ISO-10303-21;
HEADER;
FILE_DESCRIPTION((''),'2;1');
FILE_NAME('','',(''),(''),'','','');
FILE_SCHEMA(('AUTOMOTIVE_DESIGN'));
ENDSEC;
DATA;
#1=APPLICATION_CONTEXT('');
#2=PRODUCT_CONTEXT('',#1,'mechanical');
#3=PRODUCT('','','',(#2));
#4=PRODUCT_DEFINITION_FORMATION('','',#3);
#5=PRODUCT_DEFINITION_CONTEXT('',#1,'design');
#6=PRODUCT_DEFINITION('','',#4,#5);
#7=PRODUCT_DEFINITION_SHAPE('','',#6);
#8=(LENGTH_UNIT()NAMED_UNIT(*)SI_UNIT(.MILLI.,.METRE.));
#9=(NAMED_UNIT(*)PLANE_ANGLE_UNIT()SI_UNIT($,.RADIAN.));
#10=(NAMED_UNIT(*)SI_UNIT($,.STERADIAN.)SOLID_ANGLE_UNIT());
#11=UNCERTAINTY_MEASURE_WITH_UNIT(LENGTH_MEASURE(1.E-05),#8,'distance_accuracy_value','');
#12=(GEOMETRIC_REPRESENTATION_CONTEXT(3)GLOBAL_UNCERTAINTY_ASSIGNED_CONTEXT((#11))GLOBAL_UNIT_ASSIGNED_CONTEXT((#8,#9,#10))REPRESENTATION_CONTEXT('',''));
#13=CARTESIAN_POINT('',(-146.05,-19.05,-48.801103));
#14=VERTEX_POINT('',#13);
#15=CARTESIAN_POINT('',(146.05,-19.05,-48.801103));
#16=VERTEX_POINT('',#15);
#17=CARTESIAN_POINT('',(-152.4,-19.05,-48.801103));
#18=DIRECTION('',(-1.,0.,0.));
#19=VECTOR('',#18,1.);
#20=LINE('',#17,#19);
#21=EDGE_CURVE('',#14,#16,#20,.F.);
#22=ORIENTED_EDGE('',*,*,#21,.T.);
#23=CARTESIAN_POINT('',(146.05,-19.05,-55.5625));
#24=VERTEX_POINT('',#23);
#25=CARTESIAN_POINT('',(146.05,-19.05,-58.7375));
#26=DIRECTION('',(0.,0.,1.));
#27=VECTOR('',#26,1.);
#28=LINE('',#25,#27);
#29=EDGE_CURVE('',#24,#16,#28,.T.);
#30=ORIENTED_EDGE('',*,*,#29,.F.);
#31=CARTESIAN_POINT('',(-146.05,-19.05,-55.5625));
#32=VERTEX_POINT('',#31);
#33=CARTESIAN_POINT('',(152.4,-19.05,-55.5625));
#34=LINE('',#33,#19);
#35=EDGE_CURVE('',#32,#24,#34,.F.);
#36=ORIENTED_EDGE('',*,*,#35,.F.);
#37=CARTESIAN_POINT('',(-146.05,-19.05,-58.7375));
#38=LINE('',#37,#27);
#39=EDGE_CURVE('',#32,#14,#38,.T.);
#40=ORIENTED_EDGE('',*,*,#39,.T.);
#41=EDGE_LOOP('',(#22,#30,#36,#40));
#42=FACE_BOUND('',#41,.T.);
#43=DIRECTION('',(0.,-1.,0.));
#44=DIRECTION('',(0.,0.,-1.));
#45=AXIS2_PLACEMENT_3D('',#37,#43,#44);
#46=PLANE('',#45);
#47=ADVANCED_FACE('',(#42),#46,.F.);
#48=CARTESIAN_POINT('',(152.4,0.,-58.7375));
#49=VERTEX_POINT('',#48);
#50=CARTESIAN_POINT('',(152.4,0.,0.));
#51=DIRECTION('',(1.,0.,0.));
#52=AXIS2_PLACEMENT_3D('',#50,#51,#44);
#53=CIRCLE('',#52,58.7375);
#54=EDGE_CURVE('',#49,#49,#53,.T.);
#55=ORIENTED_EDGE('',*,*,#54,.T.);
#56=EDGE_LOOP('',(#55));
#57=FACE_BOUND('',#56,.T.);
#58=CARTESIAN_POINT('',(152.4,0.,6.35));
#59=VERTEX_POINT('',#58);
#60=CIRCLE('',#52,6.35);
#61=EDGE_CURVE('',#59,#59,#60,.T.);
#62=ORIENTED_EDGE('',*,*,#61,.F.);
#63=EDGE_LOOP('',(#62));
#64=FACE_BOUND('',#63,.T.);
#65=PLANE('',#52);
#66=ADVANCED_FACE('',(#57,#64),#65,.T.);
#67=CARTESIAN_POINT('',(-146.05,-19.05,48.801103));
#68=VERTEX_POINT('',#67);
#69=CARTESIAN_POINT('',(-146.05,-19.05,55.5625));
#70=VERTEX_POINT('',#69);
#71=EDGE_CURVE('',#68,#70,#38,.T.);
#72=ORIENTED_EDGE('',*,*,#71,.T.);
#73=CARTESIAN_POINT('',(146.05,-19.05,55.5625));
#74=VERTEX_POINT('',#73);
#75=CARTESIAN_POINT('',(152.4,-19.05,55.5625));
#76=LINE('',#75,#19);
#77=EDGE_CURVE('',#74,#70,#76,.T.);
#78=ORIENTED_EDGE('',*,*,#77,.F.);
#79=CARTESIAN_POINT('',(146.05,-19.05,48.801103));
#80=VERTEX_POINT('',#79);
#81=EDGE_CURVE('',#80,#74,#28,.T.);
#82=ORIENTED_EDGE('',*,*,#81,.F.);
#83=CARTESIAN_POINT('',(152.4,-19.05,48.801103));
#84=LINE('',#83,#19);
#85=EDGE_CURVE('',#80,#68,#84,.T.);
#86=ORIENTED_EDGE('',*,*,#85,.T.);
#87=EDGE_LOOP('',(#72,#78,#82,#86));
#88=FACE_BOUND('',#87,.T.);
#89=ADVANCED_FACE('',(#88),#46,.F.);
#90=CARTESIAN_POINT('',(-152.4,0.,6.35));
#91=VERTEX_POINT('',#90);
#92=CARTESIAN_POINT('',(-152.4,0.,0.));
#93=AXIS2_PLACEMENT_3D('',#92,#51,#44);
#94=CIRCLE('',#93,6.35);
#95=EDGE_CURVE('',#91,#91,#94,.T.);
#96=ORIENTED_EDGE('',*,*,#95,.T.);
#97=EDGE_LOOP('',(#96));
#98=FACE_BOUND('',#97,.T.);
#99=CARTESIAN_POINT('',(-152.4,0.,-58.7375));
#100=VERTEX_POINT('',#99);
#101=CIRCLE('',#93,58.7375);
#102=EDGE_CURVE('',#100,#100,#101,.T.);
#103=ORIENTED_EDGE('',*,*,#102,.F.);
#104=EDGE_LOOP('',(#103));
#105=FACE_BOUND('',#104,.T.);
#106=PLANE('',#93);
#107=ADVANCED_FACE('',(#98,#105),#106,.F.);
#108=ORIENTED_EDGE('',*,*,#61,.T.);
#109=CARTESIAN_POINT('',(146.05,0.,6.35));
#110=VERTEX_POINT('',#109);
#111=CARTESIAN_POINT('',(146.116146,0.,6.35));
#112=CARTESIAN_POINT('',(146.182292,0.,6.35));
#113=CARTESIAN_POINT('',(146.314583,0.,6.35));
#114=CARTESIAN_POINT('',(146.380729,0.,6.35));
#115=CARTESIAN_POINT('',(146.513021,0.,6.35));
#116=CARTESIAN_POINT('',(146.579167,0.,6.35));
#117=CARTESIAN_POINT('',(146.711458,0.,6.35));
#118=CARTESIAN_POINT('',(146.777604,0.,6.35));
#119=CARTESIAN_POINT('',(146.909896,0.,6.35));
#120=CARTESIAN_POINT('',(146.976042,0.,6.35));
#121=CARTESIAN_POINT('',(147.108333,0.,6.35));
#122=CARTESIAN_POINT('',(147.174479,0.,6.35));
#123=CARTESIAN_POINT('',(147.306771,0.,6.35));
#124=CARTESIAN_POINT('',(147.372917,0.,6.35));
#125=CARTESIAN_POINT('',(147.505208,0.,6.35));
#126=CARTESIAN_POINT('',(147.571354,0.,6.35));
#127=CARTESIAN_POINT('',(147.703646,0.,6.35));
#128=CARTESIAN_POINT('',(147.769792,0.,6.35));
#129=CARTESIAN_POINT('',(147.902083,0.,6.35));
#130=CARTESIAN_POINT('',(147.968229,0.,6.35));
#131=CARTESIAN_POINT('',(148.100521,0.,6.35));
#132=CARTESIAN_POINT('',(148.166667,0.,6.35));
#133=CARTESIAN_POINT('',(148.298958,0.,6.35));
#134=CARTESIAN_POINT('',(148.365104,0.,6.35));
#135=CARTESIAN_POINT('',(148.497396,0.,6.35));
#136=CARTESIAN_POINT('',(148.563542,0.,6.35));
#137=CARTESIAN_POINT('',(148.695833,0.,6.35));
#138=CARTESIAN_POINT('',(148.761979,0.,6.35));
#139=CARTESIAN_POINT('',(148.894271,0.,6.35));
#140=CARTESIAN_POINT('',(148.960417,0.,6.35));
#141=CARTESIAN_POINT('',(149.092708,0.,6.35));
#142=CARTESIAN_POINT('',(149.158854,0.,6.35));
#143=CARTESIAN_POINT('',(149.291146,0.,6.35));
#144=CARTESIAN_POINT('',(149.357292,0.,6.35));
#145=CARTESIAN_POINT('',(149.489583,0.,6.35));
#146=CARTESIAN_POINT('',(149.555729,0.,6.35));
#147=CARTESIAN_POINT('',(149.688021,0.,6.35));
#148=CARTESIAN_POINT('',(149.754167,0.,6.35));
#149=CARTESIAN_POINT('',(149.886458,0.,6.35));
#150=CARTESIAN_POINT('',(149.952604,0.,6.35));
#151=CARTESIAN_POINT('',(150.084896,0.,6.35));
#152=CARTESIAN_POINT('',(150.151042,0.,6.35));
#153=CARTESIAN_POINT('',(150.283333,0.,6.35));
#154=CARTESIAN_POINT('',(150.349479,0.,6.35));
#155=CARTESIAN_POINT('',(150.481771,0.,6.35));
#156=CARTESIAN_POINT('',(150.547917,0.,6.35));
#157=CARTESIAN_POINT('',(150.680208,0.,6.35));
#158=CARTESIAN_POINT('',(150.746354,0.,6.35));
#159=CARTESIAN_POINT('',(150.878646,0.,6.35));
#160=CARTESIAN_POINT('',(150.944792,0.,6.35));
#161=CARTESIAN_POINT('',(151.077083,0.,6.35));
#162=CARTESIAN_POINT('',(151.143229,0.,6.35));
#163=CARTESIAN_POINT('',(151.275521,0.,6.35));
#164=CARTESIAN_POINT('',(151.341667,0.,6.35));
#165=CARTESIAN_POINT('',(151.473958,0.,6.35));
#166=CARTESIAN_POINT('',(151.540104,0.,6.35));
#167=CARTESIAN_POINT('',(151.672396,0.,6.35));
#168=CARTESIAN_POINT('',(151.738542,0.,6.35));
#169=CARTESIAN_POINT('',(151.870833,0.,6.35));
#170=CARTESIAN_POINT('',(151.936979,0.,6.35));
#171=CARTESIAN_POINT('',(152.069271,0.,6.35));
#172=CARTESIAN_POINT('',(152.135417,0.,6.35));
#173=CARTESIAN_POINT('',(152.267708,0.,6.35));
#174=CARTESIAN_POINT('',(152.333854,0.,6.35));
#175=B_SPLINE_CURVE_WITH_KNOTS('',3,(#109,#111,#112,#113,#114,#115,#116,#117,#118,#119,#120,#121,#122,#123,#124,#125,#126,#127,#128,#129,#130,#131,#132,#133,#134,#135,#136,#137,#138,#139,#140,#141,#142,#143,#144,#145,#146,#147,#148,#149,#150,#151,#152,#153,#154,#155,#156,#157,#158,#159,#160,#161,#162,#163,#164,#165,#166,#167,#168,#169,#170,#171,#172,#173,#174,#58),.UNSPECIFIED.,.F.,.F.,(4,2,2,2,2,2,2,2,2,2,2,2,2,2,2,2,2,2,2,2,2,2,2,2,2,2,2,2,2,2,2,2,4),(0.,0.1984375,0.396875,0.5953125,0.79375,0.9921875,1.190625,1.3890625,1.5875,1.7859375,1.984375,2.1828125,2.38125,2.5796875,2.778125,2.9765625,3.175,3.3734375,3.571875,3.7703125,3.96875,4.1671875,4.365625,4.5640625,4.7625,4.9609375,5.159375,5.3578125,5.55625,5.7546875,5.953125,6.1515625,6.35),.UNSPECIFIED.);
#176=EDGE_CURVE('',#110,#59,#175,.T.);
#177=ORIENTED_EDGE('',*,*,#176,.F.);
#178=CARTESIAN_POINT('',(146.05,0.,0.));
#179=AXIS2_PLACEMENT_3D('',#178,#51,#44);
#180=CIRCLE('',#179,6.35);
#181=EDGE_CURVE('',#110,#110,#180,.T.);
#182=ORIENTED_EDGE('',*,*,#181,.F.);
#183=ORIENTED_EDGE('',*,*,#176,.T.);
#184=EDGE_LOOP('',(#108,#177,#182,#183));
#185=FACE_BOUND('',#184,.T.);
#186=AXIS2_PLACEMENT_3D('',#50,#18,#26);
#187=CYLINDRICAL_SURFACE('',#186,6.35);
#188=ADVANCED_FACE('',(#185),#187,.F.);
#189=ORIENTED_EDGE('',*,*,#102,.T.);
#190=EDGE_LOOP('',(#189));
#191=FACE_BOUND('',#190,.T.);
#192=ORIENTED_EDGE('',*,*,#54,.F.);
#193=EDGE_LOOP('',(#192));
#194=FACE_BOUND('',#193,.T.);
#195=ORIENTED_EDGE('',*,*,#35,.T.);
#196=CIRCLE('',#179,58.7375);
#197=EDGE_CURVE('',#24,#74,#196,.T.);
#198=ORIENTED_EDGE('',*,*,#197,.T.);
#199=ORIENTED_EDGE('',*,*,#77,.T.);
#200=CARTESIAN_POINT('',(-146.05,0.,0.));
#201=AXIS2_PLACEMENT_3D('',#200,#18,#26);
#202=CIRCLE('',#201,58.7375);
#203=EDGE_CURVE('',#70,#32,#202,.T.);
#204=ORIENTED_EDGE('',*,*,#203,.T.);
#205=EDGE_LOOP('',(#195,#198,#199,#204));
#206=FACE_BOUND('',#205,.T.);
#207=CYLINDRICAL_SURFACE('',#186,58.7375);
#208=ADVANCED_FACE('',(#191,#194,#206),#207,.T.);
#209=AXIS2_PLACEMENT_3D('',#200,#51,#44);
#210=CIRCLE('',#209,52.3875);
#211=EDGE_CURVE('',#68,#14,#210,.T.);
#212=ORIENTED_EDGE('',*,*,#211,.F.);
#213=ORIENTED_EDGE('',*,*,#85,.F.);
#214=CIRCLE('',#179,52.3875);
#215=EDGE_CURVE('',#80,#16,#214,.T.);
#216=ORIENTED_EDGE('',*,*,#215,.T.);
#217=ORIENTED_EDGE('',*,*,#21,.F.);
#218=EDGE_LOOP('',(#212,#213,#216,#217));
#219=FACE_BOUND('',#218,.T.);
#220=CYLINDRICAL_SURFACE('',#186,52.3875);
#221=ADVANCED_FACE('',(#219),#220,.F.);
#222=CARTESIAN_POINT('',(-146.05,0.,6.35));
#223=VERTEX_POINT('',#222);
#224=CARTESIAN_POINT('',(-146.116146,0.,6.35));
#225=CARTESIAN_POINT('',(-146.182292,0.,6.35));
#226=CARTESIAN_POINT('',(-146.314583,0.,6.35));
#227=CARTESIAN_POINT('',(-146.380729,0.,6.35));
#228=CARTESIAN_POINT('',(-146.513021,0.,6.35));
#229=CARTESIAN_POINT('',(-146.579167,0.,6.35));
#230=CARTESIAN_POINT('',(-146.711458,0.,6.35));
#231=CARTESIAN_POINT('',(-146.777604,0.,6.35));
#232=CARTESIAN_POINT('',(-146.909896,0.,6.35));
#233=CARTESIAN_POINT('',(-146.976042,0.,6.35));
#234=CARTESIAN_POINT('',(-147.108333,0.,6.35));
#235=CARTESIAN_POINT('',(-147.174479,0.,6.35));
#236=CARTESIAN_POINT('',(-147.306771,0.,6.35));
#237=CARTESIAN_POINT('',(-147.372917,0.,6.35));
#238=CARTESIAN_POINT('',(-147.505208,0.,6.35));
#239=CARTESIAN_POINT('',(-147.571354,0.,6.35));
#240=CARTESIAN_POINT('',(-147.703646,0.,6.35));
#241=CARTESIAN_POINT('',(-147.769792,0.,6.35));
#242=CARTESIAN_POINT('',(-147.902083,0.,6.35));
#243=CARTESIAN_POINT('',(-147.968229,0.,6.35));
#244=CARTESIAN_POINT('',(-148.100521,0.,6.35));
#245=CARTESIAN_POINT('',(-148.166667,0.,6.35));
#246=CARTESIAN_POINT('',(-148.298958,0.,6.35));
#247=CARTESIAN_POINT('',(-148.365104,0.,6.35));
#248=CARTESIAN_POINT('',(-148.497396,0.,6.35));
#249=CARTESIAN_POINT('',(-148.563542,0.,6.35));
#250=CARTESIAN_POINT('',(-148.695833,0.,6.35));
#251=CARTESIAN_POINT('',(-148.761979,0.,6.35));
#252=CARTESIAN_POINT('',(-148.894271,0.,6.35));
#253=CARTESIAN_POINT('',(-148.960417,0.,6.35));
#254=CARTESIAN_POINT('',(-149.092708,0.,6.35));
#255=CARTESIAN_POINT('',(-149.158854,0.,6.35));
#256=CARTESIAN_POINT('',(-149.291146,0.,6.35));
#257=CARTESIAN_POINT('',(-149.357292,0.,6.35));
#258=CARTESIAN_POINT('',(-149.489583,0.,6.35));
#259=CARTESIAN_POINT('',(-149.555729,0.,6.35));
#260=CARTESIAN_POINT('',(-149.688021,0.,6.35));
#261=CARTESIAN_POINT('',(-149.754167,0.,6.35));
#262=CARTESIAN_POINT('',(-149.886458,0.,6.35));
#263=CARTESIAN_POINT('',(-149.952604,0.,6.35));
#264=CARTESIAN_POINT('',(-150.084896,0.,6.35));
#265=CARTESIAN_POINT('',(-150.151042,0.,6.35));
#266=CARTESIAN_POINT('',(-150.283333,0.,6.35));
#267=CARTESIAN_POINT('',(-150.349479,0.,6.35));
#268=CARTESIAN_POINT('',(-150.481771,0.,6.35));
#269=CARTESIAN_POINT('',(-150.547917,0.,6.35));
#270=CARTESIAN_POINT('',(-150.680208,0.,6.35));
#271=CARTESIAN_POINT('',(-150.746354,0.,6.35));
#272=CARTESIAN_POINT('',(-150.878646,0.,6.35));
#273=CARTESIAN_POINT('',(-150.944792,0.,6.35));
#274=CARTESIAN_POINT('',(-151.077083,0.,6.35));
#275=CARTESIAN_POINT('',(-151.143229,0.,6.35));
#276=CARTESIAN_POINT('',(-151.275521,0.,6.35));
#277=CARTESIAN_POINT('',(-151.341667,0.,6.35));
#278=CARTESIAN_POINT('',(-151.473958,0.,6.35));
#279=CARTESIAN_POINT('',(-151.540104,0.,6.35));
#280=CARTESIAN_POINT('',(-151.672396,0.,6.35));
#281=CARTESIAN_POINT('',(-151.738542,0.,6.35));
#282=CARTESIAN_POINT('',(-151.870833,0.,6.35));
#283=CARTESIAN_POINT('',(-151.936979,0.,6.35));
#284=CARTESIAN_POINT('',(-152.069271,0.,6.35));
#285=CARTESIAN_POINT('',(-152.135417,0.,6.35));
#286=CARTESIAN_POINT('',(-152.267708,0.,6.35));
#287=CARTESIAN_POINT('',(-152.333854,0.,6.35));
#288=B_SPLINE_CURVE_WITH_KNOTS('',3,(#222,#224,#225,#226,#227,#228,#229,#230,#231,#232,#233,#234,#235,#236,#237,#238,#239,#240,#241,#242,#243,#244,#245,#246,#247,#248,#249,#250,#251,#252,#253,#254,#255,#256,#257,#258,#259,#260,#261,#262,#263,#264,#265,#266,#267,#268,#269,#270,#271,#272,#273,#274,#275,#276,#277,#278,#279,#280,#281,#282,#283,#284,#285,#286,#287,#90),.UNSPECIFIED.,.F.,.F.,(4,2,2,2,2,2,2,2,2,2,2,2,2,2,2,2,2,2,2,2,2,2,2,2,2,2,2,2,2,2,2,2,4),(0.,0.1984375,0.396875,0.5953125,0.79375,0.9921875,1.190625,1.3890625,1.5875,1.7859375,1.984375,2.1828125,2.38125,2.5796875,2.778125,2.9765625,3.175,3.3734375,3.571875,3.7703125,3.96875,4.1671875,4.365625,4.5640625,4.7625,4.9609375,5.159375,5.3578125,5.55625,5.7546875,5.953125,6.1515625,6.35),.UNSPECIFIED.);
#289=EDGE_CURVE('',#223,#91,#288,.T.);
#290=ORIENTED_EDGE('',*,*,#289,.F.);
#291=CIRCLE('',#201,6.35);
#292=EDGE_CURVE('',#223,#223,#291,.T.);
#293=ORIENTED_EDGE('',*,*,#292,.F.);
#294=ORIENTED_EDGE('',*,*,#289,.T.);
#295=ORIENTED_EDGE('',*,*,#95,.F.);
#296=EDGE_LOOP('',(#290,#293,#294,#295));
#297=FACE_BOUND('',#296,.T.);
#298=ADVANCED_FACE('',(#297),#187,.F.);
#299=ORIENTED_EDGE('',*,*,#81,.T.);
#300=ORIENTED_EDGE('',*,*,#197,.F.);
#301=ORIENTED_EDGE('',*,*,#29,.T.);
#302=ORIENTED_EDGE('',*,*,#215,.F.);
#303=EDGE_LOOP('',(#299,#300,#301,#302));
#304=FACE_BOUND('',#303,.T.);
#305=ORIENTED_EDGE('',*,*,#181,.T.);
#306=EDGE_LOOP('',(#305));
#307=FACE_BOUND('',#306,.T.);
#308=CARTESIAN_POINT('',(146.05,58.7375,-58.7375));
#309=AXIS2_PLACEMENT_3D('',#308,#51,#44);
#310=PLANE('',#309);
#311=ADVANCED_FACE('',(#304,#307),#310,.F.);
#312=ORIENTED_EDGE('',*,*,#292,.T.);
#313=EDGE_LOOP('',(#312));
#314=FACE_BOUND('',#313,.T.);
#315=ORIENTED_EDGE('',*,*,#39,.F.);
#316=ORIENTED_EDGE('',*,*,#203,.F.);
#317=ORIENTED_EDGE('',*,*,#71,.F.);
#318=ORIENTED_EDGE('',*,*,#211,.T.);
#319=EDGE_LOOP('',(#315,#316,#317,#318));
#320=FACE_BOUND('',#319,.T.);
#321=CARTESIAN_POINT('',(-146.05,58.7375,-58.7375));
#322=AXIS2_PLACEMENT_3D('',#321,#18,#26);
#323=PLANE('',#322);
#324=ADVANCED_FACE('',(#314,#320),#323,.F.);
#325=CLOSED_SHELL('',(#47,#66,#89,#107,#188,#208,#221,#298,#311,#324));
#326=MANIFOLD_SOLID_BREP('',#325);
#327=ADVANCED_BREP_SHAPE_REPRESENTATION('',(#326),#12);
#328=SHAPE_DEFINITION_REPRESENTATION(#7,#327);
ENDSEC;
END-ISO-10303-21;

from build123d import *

# Parameters (mm, degrees)
SKETCH1_R               = 58.7375
SKETCH1_R_2             = 6.35
BOSS_EXTRUDE1_DEPTH     = 152.4
CUT_EXTRUDE1_DEPTH      = 174.568279972
CUT_EXTRUDE1_DEPTH_BACK = 174.568279972
SKETCH2_W               = 292.1
SKETCH2_H               = 77.7875
SHELL1_START            = -146.05
SHELL1_DEPTH            = 292.1


# Read off the part's stored shape, not the designer's step: Shell1
with BuildPart() as part:
    # Sketch1 → Boss-Extrude1 (new, symmetric)
    with BuildSketch(Plane(origin=(0, 0, 0), x_dir=(0, 0, -1), z_dir=(1, 0, 0))):
        with Locations(Location((0, 0, 0), (0, 0, 180))):
            Circle(SKETCH1_R)
        with Locations(Location((0, 0, 0), (0, 0, 180))):
            Circle(SKETCH1_R_2, mode=Mode.SUBTRACT)
    extrude(amount=BOSS_EXTRUDE1_DEPTH, both=True)

    # Sketch2 → Cut-Extrude1 (cut, two sides: drawn at the far end of the back side and taken through both)
    with BuildSketch(Plane.XY.offset(-CUT_EXTRUDE1_DEPTH_BACK)):
        with Locations((0, 19.84375)):
            Rectangle(SKETCH2_W, SKETCH2_H)
    extrude(amount=CUT_EXTRUDE1_DEPTH + CUT_EXTRUDE1_DEPTH_BACK, mode=Mode.SUBTRACT)

    # Shell1 outline → Shell1 (cut)
    with BuildSketch(Plane.YZ.offset(SHELL1_START)):
        with BuildLine():
            ThreePointArc((-19.05, 48.801103023), (-52.3875, 0), (-19.05, -48.801103023))
            Line((-19.05, -48.801103023), (-19.05, 48.801103023))
        make_face()
    extrude(amount=SHELL1_DEPTH, mode=Mode.SUBTRACT)


solid = part.part
